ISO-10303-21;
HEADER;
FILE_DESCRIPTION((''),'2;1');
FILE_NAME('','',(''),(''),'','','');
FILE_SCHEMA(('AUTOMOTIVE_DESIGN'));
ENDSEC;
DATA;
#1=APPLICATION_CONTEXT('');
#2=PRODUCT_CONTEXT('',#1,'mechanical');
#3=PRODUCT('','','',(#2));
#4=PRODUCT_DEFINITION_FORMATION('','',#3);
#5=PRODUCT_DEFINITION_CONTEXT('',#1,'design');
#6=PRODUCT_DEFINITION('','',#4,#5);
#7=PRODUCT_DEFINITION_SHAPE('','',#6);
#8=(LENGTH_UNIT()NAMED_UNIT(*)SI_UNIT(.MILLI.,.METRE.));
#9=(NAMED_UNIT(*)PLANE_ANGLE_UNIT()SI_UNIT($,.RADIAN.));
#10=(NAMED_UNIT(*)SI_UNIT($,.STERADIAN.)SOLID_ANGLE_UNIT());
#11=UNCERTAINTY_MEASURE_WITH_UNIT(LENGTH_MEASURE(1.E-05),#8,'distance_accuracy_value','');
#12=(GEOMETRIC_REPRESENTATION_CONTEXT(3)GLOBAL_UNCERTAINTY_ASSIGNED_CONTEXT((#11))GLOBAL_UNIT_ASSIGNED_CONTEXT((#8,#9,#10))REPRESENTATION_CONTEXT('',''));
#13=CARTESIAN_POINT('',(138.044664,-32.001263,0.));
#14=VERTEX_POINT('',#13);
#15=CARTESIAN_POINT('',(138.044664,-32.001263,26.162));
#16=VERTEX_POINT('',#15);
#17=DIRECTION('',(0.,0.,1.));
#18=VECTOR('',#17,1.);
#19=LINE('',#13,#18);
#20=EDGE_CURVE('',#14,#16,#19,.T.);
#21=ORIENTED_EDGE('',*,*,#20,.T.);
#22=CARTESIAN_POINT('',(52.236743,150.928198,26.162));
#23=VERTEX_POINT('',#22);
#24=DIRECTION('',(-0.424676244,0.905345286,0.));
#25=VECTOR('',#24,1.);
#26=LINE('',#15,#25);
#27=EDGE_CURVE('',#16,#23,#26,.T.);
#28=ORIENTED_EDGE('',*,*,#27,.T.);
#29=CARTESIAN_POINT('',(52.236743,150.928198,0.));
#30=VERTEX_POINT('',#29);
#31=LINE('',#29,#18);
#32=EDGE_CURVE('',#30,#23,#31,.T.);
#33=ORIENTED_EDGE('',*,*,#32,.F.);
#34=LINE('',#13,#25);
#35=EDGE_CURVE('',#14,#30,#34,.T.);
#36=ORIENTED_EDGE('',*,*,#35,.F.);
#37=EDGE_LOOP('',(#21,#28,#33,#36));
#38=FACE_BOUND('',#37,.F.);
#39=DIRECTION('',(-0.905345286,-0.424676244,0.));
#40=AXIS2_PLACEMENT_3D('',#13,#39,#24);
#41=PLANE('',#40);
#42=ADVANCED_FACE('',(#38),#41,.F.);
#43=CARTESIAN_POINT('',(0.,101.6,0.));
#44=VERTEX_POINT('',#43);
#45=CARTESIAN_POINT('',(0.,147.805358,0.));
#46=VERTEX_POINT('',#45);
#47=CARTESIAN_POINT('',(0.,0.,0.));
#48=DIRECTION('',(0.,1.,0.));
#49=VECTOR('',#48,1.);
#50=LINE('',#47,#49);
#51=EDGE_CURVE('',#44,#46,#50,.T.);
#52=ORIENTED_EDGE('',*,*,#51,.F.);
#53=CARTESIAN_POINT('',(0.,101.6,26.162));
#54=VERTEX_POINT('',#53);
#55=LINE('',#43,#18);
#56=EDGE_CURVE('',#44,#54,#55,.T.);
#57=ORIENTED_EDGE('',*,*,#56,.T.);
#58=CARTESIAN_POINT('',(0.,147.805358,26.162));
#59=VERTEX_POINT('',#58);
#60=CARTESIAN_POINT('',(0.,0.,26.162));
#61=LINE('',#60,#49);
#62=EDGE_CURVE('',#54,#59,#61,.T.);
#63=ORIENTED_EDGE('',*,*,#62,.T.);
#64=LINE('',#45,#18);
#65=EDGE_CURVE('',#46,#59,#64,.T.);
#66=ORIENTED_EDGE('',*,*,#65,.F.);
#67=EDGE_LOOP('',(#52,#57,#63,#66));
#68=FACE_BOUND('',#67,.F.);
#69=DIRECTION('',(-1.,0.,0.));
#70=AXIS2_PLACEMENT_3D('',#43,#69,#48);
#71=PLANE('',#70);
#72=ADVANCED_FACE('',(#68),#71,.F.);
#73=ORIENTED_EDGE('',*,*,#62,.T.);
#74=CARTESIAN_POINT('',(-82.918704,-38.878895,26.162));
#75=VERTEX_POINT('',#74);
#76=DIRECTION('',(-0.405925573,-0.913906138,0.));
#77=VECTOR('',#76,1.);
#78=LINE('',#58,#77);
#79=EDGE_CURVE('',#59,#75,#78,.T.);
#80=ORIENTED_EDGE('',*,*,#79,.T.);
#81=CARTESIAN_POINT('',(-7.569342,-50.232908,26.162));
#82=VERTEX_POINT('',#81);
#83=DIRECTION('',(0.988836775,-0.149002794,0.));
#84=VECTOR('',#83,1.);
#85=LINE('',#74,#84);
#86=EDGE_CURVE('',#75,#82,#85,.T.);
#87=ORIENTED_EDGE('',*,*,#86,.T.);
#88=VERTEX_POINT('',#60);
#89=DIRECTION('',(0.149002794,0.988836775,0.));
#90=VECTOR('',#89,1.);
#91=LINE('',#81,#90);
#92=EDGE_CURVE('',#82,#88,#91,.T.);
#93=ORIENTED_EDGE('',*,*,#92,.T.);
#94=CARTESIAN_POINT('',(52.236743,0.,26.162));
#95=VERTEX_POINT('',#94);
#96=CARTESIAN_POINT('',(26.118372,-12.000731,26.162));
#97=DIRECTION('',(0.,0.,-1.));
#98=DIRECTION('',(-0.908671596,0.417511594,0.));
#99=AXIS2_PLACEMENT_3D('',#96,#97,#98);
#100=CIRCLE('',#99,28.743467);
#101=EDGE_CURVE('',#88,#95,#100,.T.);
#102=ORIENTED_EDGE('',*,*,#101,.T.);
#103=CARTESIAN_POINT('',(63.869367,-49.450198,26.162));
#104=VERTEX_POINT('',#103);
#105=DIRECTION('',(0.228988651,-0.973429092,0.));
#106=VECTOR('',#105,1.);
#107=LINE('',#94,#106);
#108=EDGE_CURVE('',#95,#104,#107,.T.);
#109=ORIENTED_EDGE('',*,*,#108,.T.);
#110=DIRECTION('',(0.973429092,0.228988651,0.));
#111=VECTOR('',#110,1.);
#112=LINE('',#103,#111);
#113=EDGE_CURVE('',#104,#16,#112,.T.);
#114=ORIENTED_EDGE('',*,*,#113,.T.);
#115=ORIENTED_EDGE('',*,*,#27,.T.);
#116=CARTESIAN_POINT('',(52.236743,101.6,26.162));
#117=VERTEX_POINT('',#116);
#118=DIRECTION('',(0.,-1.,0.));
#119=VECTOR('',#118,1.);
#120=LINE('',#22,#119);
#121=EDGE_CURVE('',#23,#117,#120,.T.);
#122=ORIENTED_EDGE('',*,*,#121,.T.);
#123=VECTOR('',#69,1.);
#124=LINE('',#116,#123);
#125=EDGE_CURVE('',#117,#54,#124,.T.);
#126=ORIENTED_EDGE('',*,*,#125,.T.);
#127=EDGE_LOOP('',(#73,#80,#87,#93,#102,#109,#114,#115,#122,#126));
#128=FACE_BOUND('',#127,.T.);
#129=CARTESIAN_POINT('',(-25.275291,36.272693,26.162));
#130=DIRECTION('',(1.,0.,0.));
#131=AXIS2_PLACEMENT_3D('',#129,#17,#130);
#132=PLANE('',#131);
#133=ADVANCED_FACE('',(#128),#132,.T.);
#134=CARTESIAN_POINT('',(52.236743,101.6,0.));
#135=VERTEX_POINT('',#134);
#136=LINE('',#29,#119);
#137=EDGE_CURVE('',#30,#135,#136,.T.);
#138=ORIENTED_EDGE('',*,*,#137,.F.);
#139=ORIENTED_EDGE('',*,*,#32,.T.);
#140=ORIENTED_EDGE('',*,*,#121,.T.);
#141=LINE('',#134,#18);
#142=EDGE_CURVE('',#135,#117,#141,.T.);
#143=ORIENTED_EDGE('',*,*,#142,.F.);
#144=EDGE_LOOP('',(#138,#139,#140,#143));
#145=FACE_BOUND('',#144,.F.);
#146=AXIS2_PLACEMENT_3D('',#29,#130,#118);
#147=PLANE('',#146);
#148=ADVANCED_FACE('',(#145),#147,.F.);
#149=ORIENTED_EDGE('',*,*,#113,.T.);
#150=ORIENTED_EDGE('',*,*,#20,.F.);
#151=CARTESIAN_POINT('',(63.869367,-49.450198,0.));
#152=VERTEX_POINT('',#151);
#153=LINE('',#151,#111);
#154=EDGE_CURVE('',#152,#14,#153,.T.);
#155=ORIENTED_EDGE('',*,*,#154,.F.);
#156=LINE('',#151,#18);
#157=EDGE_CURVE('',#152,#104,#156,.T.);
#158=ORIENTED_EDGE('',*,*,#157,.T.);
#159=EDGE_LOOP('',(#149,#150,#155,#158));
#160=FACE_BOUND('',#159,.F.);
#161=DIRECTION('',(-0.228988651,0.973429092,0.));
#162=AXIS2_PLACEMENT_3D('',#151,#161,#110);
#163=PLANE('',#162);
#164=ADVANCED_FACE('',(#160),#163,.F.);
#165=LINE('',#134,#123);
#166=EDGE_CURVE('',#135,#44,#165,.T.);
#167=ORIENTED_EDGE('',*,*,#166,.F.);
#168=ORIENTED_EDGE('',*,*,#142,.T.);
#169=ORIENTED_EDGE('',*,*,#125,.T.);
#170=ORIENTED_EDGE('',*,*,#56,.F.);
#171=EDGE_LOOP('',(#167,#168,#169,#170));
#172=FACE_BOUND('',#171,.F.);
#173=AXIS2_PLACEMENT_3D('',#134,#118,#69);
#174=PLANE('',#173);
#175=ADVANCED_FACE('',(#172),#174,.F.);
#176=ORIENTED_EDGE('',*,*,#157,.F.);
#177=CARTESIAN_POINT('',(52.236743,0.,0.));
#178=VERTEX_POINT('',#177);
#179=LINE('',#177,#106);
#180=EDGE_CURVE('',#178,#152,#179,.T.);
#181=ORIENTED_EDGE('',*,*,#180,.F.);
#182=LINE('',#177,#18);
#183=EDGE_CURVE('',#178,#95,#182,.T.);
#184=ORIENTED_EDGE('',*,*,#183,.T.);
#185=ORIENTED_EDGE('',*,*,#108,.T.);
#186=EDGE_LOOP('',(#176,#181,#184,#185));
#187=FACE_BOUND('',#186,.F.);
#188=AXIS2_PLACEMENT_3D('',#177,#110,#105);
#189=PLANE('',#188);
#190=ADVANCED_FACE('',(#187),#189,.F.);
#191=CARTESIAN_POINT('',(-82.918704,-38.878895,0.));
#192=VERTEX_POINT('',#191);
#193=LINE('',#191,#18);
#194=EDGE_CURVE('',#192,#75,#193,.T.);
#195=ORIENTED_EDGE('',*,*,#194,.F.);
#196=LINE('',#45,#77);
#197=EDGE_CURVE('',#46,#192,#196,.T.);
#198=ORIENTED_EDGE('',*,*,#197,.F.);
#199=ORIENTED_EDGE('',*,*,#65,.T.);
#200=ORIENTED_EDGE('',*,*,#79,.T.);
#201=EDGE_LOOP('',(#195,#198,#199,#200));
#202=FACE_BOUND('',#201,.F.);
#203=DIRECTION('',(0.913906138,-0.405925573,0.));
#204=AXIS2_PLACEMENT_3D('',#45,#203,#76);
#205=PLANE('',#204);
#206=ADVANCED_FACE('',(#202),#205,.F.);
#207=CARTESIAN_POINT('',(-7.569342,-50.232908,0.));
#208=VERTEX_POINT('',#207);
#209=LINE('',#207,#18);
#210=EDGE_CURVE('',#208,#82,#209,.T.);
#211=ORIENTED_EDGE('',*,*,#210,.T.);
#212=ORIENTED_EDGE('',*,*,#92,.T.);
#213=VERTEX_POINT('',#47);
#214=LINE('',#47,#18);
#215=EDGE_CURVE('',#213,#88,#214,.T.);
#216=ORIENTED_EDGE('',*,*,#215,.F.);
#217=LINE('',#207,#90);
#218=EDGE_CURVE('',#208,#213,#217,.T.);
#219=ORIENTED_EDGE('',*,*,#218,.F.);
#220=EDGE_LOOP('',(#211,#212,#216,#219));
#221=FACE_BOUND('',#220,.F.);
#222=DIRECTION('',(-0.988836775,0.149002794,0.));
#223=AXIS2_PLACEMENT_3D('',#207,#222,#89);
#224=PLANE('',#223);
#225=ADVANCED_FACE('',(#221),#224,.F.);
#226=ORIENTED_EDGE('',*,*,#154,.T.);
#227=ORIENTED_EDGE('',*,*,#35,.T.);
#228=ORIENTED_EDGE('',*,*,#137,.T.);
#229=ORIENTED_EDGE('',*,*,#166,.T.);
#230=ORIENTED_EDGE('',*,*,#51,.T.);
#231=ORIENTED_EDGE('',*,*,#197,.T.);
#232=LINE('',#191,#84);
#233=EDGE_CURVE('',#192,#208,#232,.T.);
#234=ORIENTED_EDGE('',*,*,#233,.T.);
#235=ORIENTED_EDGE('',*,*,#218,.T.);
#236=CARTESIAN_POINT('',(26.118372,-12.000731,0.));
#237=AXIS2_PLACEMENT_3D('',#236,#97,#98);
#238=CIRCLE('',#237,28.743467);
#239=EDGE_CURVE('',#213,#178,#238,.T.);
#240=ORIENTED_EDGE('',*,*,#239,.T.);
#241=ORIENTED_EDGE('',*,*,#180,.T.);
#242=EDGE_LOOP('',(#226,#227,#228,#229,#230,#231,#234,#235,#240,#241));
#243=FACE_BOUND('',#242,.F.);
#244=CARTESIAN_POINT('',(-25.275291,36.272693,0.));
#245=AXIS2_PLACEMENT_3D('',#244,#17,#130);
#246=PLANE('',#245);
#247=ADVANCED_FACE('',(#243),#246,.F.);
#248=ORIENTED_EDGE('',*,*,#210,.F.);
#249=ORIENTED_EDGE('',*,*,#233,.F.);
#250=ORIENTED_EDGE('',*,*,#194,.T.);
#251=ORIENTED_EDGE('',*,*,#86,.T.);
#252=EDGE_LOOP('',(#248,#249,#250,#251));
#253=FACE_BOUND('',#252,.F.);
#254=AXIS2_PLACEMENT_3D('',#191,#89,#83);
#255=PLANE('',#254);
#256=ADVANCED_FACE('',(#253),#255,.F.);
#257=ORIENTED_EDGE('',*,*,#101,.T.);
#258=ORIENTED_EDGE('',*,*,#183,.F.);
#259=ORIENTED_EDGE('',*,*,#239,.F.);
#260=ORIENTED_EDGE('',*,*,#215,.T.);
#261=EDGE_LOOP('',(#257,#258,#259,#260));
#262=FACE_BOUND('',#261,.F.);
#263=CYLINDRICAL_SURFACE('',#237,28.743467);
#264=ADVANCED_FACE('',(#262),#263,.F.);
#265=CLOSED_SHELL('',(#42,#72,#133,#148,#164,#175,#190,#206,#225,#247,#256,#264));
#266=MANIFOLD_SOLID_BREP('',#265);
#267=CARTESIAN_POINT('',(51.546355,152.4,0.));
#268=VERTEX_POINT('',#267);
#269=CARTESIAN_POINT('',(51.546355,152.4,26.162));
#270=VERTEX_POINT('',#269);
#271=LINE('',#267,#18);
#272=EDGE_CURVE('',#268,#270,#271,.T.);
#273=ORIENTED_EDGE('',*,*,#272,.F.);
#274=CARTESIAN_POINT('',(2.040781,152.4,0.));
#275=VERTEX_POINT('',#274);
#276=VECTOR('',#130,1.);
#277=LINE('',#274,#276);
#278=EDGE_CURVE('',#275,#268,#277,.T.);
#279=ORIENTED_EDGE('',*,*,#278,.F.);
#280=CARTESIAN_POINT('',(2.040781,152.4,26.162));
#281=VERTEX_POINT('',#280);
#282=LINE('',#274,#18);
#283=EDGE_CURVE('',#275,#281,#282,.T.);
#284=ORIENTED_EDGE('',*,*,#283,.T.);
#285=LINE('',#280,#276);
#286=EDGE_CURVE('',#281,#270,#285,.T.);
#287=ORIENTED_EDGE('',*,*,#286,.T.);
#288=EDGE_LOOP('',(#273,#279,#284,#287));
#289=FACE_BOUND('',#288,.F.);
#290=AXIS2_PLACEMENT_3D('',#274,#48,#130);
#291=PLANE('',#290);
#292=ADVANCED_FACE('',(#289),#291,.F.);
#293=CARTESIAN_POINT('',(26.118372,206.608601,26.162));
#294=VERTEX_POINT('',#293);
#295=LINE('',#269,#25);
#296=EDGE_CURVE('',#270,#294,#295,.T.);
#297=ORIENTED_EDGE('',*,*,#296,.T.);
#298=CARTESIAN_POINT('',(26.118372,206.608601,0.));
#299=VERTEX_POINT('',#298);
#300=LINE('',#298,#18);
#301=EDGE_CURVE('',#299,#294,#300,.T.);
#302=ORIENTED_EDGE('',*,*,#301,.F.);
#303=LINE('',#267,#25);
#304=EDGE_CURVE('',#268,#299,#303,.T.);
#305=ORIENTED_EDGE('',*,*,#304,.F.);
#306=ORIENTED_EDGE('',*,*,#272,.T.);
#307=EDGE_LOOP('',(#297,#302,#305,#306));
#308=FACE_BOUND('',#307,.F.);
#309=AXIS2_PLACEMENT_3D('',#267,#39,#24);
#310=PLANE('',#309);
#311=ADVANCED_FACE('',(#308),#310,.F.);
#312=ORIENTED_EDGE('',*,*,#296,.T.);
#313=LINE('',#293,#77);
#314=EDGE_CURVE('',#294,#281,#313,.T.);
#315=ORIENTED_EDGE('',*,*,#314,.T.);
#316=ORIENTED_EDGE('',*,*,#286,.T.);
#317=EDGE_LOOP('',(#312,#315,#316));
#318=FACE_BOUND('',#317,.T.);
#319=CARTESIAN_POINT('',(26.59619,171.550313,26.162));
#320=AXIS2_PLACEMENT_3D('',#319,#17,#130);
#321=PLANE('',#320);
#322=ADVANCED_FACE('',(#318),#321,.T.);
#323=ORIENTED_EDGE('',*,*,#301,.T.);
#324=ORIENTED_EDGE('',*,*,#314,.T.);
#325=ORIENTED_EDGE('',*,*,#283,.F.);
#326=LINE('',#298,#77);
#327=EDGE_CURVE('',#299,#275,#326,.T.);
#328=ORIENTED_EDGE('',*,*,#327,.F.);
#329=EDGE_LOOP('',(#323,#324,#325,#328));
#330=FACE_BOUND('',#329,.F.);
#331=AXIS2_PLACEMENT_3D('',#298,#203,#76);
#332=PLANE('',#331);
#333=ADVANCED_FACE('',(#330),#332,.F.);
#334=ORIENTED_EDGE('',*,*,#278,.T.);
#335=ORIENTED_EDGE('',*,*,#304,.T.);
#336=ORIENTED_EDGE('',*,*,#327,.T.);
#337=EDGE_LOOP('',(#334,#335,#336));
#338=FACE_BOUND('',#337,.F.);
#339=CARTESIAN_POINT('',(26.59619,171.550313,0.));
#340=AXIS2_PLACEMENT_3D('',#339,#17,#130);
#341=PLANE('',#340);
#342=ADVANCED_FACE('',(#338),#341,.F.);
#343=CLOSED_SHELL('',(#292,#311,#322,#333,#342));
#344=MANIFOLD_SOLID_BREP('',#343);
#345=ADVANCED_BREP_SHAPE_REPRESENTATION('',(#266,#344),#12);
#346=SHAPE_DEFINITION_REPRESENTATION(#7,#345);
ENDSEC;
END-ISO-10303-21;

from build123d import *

# Parameters (mm, degrees)
F0_W     = 52.2367432714
F0_H     = 20.7408728629
F1_DEPTH = 26.162


with BuildPart() as f1:
    # F0 (on Top) → F1 (new body)
    with BuildSketch(Plane.XY):
        Polygon((-7.5693419099, -50.2329081684), (0, 0), (0, 30.0591271371), (0, 50.8), (0, 101.6), (0, 147.8053582557), (-82.9187041624, -38.8788953036), align=None)
        Polygon((52.2367432714, 30.0591271371), (52.2367432714, 0), (63.8693667413, -49.4501978884), (138.044663574, -32.0012626835), (52.2367432714, 150.9281977383), (52.2367432714, 101.6), (52.2367432714, 50.8), align=None)
        with BuildLine():
            ThreePointArc((0, 0), (26.1183716357, 16.7427360355), (52.2367432714, 0))
            Line((52.2367432714, 0), (52.2367432714, 30.0591271371))
            Line((52.2367432714, 30.0591271371), (0, 30.0591271371))
            Line((0, 30.0591271371), (0, 0))
        make_face()
        Polygon((0, 50.8), (52.2367432714, 50.8), (26.1183716357, 76.2), align=None)
        Polygon((0, 101.6), (0, 50.8), (26.1183716357, 76.2), align=None)
        Polygon((26.1183716357, 76.2), (52.2367432714, 101.6), (0, 101.6), align=None)
        Polygon((26.1183716357, 76.2), (52.2367432714, 50.8), (52.2367432714, 101.6), align=None)
        with Locations((26.1183716357, 40.4295635685)):
            Rectangle(F0_W, F0_H)
    extrude(amount=F1_DEPTH)


with BuildPart() as f1b:
    # F0 (on Top) → F1, piece 2 (new body)
    with BuildSketch(Plane.XY):
        Polygon((2.0407813314, 152.4), (51.5463553432, 152.4), (26.1183716357, 206.6086012904), align=None)
    extrude(amount=F1_DEPTH)


solid = Compound([f1.part, f1b.part])
